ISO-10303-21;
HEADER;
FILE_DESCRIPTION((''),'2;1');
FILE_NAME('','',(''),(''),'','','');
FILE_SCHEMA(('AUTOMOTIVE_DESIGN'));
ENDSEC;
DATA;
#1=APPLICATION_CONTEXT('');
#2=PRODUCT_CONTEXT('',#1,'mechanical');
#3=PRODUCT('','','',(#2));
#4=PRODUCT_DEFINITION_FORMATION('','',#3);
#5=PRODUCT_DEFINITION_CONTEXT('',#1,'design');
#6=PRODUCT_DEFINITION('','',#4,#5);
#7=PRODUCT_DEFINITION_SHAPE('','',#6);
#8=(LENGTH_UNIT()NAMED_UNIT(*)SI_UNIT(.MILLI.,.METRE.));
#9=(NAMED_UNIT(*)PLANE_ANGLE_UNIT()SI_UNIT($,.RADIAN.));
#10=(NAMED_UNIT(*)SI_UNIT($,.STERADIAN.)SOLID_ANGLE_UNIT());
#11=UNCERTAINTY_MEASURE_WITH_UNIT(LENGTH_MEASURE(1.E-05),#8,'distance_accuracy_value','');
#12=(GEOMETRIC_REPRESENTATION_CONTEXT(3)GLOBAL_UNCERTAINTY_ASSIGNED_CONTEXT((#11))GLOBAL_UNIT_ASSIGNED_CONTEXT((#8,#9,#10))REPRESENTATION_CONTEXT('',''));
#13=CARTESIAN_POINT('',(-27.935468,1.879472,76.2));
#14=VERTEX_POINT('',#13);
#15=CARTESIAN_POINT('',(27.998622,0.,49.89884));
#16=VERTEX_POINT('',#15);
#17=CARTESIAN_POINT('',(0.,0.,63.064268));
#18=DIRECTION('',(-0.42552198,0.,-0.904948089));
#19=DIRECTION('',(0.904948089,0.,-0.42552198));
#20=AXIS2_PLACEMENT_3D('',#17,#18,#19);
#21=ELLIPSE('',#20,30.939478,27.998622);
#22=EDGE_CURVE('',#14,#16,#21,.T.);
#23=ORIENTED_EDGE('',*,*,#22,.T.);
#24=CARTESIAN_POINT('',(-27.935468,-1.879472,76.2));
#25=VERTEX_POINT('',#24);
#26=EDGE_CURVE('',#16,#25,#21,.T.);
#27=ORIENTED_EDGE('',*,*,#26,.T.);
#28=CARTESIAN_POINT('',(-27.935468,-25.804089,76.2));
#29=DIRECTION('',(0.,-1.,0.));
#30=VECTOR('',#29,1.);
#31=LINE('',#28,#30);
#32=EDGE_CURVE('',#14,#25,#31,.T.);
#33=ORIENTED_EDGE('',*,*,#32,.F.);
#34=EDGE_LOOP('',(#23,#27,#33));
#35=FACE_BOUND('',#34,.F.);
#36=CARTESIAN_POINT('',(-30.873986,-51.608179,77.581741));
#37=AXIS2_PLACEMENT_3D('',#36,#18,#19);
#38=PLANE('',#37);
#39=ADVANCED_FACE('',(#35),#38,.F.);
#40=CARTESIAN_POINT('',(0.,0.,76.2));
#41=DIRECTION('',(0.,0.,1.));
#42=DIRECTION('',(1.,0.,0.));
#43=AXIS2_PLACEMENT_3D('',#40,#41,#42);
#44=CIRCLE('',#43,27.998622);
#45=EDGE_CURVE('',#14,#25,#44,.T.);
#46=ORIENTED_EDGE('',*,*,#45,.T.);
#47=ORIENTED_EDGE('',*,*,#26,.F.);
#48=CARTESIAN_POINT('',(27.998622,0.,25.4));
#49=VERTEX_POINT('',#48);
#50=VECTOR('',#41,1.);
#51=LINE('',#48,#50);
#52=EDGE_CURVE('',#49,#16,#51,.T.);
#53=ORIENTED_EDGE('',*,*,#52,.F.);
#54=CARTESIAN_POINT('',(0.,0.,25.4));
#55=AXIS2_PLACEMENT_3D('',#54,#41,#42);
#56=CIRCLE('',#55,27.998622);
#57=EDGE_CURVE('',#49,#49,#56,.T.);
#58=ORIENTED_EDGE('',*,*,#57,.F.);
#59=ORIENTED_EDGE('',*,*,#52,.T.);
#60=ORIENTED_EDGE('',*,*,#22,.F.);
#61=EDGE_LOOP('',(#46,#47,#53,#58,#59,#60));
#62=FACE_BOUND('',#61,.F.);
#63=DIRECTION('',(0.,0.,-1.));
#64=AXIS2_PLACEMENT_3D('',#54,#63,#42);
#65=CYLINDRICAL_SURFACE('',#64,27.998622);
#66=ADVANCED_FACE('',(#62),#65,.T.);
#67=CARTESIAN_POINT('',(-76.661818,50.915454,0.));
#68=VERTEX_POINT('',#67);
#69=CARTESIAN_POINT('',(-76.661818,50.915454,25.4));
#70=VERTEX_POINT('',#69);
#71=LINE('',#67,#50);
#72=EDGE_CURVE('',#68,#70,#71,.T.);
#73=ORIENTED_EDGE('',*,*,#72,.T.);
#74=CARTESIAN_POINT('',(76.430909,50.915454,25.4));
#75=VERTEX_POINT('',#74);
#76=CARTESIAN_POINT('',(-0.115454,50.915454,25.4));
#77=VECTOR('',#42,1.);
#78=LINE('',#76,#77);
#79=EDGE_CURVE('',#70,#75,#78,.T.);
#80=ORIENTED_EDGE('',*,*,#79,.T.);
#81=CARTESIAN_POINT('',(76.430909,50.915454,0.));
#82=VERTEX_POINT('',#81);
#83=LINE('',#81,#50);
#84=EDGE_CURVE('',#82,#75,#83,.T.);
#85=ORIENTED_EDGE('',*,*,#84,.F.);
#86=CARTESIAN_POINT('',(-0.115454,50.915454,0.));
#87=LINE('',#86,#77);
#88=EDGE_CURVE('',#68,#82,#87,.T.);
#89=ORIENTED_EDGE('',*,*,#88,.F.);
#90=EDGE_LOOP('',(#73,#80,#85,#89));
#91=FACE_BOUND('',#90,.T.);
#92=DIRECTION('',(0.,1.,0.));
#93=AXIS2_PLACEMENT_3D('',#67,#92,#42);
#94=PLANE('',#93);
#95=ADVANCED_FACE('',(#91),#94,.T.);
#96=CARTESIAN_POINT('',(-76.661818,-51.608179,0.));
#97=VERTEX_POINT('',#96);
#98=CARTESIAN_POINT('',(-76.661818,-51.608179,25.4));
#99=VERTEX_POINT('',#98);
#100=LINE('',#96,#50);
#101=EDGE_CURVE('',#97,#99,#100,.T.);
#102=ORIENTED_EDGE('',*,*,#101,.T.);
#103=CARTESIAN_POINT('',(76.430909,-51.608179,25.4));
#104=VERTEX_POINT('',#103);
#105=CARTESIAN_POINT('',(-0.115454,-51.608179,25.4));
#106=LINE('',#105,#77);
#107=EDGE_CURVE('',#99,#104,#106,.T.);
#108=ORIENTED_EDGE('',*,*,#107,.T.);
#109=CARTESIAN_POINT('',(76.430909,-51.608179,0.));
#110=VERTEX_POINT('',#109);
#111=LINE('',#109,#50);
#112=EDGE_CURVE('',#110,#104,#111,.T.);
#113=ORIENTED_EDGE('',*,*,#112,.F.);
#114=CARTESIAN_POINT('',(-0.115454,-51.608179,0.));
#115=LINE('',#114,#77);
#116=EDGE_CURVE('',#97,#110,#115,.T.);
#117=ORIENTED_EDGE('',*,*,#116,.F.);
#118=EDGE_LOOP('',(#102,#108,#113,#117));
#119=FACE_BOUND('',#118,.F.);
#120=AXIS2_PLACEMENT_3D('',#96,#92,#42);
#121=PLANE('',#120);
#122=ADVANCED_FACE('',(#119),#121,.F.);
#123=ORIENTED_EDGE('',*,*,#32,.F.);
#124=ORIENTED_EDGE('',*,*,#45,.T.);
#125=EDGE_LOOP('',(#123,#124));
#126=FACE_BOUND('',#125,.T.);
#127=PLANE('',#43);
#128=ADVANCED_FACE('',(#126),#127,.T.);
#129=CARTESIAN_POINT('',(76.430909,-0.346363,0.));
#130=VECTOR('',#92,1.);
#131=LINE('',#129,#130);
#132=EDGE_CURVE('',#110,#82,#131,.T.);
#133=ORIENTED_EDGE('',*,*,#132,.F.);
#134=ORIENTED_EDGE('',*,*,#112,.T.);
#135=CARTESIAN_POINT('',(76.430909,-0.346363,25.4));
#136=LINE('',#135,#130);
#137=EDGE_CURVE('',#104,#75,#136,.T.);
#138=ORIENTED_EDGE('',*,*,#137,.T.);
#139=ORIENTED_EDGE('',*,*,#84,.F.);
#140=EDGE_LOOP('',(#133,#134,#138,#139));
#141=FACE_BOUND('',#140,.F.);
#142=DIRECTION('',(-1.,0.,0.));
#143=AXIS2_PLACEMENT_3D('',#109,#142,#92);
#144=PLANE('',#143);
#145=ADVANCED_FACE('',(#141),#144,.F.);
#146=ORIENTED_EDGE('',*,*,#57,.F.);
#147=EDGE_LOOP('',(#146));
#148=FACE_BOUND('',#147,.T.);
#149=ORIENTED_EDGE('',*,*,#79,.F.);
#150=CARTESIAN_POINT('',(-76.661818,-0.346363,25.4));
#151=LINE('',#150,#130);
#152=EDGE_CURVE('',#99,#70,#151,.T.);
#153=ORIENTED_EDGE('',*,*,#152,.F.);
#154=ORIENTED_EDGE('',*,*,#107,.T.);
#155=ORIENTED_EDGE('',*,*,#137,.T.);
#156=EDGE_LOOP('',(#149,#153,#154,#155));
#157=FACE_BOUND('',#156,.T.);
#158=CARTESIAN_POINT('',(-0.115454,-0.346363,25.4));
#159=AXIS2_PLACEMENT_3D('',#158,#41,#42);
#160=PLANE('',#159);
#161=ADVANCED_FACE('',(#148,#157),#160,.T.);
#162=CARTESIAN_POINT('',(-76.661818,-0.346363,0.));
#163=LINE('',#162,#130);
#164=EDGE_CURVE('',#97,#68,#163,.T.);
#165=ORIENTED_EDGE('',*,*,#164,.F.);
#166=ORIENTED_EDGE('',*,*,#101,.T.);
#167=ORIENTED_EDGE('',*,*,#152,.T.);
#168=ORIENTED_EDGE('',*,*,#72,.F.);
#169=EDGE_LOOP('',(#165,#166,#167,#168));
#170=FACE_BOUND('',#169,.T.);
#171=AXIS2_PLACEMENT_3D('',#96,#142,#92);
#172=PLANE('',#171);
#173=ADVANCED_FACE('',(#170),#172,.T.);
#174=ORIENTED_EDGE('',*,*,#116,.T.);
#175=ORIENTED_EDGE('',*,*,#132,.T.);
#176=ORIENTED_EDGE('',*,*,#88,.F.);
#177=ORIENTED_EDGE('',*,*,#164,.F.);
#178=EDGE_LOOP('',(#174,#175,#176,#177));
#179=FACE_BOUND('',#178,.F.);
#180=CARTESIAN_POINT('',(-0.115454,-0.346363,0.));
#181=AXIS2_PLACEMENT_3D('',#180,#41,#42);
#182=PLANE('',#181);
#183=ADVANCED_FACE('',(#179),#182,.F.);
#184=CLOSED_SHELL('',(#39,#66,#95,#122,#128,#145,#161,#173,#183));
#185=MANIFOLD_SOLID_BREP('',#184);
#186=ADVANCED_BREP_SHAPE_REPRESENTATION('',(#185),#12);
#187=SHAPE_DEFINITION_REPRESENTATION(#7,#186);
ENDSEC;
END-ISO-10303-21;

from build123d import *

# Parameters (mm, degrees)
F0_W     = 153.0927270651
F0_H     = 102.5236323476
F1_DEPTH = 25.4
F2_R     = 27.9986216142
F3_DEPTH = 50.8
F5_DEPTH = 121.412


# Not quite as in the source:
# - a feature names something its author has since deleted; it is built from what else it names


with BuildPart() as f1:
    # F0 (on Top) → F1 (new body)
    with BuildSketch(Plane.XY):
        with Locations((-0.1154541969, -0.3463625908)):
            Rectangle(F0_W, F0_H)
    extrude(amount=F1_DEPTH)

    # F2 (on face) → F3 (join)
    with BuildSketch(Plane.XY.offset(25.4)):
        Circle(F2_R)
    extrude(amount=F3_DEPTH)

    # F4 (on face) → F5 (cut)
    with BuildSketch(Plane.XZ.offset(51.6081787646)):
        Polygon((29.090275988, 49.3855252862), (29.2704553796, 77.5817409158), (-30.8739859611, 77.5817409158), align=None)
    extrude(amount=-F5_DEPTH, mode=Mode.SUBTRACT)


solid = f1.part
